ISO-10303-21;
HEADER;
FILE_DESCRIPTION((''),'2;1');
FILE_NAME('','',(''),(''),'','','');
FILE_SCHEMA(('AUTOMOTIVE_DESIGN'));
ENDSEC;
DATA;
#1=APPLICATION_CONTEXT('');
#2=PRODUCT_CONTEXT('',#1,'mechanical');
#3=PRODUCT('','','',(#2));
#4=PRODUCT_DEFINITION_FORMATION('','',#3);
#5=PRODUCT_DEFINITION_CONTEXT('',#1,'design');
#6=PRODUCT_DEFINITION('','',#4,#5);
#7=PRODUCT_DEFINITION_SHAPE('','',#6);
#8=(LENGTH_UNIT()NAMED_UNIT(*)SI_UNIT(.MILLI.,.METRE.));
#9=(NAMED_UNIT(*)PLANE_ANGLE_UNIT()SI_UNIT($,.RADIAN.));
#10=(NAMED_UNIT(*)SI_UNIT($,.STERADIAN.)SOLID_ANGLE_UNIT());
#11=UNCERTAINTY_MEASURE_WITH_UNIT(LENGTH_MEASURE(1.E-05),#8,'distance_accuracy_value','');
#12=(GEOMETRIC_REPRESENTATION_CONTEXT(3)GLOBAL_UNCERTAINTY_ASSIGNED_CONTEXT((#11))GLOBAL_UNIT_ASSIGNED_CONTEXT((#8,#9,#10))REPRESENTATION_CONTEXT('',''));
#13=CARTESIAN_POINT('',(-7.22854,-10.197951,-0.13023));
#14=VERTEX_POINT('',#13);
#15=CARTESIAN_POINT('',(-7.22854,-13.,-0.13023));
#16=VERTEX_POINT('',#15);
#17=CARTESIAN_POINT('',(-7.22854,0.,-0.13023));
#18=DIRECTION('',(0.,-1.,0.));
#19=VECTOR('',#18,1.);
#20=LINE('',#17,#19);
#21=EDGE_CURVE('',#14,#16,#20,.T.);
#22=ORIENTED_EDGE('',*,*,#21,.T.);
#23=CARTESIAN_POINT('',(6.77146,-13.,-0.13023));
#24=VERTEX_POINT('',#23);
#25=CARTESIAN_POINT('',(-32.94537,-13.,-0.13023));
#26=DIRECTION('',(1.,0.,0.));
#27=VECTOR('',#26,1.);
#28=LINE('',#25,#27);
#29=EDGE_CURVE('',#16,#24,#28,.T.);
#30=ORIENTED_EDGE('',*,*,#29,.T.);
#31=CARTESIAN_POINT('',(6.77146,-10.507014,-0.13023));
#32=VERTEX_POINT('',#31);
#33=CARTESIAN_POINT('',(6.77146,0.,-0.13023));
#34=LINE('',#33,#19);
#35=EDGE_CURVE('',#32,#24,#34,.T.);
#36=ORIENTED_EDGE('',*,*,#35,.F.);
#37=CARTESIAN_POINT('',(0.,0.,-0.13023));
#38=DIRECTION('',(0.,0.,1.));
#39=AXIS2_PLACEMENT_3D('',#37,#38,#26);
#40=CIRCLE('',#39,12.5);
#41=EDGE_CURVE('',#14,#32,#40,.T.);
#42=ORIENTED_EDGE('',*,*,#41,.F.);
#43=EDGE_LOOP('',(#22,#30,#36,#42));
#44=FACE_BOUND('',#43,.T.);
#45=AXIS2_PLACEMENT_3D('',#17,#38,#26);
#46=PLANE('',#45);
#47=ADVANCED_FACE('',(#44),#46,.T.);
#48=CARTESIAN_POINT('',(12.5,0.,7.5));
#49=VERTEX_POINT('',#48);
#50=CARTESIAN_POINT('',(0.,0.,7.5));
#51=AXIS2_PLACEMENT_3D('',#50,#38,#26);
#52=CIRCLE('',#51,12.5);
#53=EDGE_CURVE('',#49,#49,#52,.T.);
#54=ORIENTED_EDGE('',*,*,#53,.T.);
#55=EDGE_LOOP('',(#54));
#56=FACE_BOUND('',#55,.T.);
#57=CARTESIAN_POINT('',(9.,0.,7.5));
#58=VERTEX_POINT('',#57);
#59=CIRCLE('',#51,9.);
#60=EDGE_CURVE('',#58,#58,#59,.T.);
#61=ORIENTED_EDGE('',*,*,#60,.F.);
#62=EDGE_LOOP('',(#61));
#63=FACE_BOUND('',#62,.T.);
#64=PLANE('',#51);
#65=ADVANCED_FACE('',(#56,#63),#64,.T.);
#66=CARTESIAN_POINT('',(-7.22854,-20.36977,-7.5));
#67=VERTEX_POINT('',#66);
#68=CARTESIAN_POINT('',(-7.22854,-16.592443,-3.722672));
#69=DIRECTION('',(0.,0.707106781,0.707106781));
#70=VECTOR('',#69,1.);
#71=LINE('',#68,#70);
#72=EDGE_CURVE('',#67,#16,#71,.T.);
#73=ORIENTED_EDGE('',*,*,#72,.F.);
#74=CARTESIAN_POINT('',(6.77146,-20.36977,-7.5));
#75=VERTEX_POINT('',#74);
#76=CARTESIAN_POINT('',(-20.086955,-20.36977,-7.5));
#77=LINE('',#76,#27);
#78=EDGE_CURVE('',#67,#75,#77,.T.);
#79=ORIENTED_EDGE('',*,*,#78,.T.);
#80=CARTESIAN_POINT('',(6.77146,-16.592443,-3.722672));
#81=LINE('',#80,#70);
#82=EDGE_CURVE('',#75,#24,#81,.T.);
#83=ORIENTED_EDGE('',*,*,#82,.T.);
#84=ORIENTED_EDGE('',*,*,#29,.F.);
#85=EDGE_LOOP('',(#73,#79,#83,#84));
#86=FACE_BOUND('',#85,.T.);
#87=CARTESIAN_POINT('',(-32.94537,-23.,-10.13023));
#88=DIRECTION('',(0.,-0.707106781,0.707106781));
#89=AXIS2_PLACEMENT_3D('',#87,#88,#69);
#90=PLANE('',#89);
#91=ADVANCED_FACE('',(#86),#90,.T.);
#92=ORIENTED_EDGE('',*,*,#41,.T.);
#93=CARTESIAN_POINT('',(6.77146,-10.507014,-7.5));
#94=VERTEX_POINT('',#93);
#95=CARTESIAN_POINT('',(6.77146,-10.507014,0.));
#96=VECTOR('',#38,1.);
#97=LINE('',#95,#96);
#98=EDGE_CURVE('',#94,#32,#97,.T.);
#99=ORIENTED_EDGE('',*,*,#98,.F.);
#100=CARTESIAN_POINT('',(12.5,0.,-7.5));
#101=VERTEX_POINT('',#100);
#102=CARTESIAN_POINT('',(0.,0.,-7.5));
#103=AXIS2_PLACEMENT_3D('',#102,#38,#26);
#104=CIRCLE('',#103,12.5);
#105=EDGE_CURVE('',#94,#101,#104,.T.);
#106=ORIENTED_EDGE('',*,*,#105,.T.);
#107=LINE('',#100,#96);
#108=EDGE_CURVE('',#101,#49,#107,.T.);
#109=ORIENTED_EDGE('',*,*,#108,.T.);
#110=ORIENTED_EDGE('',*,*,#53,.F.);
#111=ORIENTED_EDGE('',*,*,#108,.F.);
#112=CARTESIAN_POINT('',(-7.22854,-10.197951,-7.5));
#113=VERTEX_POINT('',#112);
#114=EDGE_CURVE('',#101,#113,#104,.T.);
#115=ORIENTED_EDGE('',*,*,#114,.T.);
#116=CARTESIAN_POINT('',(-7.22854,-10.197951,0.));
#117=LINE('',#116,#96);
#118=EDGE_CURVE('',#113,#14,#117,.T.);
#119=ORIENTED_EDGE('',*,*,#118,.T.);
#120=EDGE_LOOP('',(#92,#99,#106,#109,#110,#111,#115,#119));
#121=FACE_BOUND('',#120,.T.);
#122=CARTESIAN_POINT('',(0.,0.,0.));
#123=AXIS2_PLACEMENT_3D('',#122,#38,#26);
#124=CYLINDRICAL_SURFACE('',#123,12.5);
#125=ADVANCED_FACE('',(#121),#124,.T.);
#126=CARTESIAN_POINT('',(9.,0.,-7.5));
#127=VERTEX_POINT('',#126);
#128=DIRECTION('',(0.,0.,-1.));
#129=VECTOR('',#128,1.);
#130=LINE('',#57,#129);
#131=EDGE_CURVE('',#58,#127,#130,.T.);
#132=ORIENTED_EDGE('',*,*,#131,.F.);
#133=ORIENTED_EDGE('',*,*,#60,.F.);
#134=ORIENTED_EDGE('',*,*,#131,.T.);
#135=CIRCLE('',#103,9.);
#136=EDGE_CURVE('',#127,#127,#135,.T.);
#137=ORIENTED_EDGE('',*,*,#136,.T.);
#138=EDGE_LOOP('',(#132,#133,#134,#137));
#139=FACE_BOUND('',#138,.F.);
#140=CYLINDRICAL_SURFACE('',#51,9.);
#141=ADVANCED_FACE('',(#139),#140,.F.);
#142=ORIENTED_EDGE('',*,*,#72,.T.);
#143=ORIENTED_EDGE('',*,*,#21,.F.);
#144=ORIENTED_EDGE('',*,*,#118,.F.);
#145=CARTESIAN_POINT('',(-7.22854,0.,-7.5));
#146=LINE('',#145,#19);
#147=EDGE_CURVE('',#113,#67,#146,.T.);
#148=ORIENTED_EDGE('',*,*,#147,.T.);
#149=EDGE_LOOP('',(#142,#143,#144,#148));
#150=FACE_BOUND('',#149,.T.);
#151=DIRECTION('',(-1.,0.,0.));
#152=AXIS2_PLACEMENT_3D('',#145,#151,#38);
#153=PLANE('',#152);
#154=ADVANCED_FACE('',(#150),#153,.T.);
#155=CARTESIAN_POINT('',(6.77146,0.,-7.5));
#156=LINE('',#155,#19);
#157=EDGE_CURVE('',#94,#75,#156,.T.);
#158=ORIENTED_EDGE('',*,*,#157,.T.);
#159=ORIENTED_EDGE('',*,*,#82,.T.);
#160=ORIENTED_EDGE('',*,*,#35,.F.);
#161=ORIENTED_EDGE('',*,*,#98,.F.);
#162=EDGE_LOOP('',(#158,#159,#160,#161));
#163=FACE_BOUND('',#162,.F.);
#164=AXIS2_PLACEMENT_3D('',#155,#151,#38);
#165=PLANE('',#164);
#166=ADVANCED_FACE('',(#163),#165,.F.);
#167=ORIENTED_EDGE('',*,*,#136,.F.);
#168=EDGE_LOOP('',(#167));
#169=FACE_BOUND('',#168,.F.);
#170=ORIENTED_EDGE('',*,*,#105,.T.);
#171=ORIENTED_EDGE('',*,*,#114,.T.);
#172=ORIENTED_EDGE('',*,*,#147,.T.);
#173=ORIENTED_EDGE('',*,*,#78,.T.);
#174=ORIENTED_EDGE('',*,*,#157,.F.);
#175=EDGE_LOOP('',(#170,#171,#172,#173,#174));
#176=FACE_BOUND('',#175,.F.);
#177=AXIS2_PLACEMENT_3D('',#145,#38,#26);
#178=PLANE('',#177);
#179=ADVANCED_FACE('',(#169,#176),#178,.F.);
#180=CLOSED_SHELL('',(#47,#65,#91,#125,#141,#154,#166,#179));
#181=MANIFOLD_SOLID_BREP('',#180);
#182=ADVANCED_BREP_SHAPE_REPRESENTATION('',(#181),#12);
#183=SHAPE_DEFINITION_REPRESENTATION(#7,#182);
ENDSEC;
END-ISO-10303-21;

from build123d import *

# Parameters (mm, degrees)
F0_R        = 12.5
F1_DEPTH    = 7.5
F2_R        = 9
F3_DEPTH    = 25
F4_W        = 14
F4_H        = 7.3697703017
F5_DEPTH    = 23
F6_R        = 9
F7_DEPTH    = 25
F8_T1_DEPTH = 65.4336597593


# Not quite as in the source:
# - a fillet or chamfer that OpenCascade refuses, or shapes differently, is made with other operations: its cross-section is extruded or revolved along the edge and cut away or added


with BuildPart() as f1:
    # F0 (on Top) → F1 (new body, symmetric)
    with BuildSketch(Plane.XY):
        Circle(F0_R)
    extrude(amount=F1_DEPTH, both=True)

    # F2 (on face) → F3 (cut)
    with BuildSketch(Plane.XY.offset(7.5)):
        Circle(F2_R)
    extrude(amount=-F3_DEPTH, mode=Mode.SUBTRACT)

    # F4 (on Front) → F5 (join)
    with BuildSketch(Plane.XZ):
        with Locations((-0.2285402901, -3.8151148492)):
            Rectangle(F4_W, F4_H)
    extrude(amount=F5_DEPTH)

    # F6 (on face) → F7 (cut)
    with BuildSketch(Plane(origin=(0, 0, -7.5), x_dir=(1, 0, 0), z_dir=(0, 0, -1))):
        Circle(F6_R)
    extrude(amount=-F7_DEPTH, mode=Mode.SUBTRACT)

    # F8: chamfer of 10 on 1 edges, made by hand

    # F8_s2 → F8_t1 (cut)
    with BuildSketch(Plane.YZ.offset(-32.9453701698)):
        Polygon((-23, -10.1302296983), (-13, -0.1302296983), (-23, -0.1302296983), align=None)
    extrude(amount=F8_T1_DEPTH, mode=Mode.SUBTRACT)


solid = f1.part
